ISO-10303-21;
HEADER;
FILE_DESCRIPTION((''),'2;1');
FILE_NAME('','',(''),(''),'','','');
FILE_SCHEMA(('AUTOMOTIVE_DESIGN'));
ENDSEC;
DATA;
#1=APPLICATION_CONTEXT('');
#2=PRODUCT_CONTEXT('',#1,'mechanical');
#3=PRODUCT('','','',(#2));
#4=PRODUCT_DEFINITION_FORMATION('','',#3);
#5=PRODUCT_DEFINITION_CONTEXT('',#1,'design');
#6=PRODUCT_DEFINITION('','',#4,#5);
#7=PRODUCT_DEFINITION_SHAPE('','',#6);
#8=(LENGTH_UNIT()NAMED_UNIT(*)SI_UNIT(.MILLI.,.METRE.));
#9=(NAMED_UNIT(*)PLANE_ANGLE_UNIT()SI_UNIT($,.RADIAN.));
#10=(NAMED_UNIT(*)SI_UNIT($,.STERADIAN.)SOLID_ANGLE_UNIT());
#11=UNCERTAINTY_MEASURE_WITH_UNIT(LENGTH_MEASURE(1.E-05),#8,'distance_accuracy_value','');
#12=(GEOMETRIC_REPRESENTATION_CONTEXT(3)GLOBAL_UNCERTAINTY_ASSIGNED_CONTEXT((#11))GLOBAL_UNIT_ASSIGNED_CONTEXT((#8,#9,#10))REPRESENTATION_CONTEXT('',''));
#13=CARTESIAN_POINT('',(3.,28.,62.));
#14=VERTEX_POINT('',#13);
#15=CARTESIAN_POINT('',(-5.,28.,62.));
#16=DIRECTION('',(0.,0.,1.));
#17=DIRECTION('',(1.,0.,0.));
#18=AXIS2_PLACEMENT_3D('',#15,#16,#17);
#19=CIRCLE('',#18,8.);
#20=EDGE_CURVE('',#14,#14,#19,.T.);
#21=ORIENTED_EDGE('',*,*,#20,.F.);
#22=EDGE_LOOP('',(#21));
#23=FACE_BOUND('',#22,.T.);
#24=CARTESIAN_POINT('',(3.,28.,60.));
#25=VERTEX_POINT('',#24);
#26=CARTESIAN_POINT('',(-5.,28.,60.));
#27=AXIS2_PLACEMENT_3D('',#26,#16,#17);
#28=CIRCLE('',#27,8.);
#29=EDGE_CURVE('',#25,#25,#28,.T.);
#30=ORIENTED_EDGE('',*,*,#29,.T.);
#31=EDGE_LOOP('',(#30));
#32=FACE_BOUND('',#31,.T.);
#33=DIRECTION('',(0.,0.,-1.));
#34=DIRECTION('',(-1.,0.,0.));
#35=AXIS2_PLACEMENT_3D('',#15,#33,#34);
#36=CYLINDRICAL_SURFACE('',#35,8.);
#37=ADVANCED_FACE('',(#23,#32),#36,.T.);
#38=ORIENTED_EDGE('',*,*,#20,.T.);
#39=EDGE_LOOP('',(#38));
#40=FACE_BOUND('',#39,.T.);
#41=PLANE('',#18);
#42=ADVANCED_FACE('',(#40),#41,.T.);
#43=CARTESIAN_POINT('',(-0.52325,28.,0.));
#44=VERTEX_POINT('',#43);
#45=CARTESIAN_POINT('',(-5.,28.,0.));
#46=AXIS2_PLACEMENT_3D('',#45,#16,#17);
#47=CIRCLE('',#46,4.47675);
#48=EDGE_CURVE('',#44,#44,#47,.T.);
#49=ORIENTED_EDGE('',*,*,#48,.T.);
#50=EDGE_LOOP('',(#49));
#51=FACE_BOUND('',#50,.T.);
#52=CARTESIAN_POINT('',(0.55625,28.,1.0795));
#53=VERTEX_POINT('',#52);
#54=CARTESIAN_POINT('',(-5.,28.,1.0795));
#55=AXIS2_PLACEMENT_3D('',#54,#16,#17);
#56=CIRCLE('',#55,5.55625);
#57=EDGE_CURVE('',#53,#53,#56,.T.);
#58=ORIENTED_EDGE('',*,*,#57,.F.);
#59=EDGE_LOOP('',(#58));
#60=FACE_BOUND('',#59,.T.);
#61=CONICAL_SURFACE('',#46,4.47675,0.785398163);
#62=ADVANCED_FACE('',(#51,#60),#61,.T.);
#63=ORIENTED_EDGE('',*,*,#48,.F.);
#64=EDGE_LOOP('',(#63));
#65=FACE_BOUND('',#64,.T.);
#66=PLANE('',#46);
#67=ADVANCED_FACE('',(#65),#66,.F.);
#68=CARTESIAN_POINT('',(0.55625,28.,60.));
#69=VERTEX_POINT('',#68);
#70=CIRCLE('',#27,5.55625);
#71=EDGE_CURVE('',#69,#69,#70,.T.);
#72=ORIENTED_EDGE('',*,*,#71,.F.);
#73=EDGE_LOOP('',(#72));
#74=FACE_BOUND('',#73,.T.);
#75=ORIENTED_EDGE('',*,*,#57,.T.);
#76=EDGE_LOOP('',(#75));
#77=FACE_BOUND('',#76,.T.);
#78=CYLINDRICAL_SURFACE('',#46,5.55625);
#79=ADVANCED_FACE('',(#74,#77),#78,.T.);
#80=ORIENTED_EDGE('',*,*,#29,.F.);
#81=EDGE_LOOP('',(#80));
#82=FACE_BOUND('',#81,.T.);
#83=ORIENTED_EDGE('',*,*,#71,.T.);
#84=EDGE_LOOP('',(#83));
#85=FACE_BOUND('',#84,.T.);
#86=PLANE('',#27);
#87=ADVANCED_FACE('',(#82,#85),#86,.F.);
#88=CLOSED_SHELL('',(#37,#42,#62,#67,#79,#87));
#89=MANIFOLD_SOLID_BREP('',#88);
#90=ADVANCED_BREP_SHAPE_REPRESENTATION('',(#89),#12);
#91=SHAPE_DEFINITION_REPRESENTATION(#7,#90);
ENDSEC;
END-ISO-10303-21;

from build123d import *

# Parameters (mm, degrees)
SKETCH_1_R      = 6
EXTRUDE_1_DEPTH = 40
SKETCH_1_4_R    = 6
EXTRUDE_3_DEPTH = 60
SKETCH_2_R      = 8
EXTRUDE_4_DEPTH = 2


# Read off the part's stored shape, not the designer's step: 7/16-14 机械螺纹 螺柱1
with BuildPart() as part:
    # 草图1 → 凸台-拉伸1 (new body)
    with BuildSketch(Plane.XY):
        with Locations((-5, 28)):
            Circle(SKETCH_1_R)
    extrude(amount=EXTRUDE_1_DEPTH)

    # 草图1<4> → 凸台-拉伸3 (add)
    with BuildSketch(Plane.XY):
        with Locations((-5, 28)):
            Circle(SKETCH_1_4_R)
    extrude(amount=EXTRUDE_3_DEPTH)

    # 草图2 → 凸台-拉伸4 (add)
    with BuildSketch(Plane.XY.offset(60)):
        with Locations((-5, 28)):
            Circle(SKETCH_2_R)
    extrude(amount=EXTRUDE_4_DEPTH)

    # 7/16-14 机械螺纹 螺柱1 outline → 7/16-14 机械螺纹 螺柱1 (revolve, cut)
    with BuildSketch(Plane(origin=(-5, 28, 0), x_dir=(1, 0, 0), z_dir=(0, -1, 0))):
        Polygon((4.47675, 0), (6, 0), (6, 60), (5.55625, 60), (5.55625, 1.0795), align=None)
    revolve(axis=Axis((-5, 28, 0), (0, 0, 1)), mode=Mode.SUBTRACT)


solid = part.part
